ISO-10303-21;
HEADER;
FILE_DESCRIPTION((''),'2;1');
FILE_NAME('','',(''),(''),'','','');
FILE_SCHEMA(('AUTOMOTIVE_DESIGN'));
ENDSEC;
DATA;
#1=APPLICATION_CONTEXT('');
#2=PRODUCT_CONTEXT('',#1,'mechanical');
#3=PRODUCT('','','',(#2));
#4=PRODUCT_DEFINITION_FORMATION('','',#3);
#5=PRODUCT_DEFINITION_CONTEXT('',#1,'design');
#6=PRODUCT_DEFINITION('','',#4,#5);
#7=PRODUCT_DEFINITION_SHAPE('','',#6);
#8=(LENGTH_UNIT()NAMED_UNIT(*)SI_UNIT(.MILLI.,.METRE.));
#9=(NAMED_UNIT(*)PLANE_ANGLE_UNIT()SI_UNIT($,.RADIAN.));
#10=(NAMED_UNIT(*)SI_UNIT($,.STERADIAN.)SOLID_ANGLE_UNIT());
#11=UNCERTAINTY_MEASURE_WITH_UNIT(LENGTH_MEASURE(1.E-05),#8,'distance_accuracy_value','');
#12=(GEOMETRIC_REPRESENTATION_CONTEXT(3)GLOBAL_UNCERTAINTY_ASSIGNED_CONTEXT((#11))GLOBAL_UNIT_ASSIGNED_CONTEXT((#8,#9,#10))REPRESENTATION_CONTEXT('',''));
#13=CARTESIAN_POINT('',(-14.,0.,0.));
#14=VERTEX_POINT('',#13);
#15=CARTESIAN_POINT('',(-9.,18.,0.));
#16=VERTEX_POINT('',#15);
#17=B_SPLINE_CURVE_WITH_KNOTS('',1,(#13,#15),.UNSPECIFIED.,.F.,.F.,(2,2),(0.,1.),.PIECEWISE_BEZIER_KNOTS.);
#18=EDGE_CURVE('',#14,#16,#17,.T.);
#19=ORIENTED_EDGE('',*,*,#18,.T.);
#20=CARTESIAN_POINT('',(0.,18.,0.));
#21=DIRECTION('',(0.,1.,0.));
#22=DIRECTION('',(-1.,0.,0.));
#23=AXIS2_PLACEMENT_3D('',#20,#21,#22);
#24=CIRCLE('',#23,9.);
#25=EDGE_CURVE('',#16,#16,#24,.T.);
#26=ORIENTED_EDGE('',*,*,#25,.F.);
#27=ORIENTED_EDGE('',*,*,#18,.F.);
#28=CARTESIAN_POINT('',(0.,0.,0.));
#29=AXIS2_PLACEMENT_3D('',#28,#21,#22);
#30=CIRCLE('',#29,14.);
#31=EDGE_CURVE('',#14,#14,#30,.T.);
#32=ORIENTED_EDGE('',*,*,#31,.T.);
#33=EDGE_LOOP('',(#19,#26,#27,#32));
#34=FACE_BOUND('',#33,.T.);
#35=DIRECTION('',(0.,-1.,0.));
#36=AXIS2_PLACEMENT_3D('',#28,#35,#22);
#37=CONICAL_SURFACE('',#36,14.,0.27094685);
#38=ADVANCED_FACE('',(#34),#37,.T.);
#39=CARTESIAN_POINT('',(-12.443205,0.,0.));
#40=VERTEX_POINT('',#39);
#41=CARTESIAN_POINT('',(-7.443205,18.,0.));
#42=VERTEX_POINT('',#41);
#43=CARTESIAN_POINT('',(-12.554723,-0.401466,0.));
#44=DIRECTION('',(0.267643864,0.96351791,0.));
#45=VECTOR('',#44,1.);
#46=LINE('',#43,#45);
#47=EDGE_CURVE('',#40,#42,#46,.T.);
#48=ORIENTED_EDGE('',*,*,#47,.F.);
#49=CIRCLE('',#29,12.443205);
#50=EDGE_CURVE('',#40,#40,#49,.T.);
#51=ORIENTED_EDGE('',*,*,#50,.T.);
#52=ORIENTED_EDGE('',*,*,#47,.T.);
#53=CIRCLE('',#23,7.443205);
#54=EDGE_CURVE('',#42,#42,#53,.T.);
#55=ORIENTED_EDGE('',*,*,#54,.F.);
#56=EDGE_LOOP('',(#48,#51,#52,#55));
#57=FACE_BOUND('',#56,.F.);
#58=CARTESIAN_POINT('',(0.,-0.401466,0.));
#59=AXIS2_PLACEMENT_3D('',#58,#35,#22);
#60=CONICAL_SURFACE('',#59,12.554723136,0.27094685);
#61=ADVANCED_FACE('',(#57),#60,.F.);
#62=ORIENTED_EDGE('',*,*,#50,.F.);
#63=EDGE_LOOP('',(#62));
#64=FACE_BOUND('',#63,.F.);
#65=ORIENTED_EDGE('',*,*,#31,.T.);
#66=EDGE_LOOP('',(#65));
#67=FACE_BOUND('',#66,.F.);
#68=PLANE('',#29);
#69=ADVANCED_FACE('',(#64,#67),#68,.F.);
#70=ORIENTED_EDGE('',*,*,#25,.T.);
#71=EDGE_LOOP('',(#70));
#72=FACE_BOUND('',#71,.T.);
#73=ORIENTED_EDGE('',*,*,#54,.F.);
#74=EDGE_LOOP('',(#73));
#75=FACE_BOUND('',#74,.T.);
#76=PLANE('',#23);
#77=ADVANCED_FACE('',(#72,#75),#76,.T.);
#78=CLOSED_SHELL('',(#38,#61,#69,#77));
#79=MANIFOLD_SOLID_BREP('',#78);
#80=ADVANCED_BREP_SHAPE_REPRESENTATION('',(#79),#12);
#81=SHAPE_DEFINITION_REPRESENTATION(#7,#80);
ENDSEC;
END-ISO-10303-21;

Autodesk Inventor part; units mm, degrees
ref_plane "YZ Plane" through (0, 0, 0) normal (1, 0, 0) x (0, 1, 0)
ref_plane "XY Plane" through (0, 0, 0) normal (0, 0, 1) x (1, 0, 0)
sketch "Szkic6" plane through (0, 0, 0) normal (0, 1, 0) x (-1, 0, 0)
  circle A0 centre (0, 0) radius 14
  dimension "d33" = 28
ref_plane "Płaszczyzna konstrukcyjna1" through (0, 18, 0) normal (0, 1, 0) x (-1, 0, 0)
sketch "Szkic7" plane through (0, 18, 0) normal (0, 1, 0) x (-1, 0, 0)
  circle A0 centre (0, 0) radius 9
  dimension "d35" = 18
loft "Wyciągnięcie złożone1" add profiles "Szkic6", "Szkic7"
shell "Skorupa1" thickness 1.5 removed faces 2 at (-2.2455, 18, -1.9894) at (-0.5625, 0, 1.5565)
equation "\"d33\" = OD1"
equation "\"d35\" = OD2"
equation "\"d52\" = THK"
equation "\"SzerokośćGięciaPodcięcia\" = Grubość"
equation "\"RozmiarPodcięciaNarożnika\" = 4 * Grubość"
equation "\"PromieńPrzejścia\" = PromieńGięcia"
equation "\"Rozmiar_promienia_Jacobiego\" = PromieńGięcia"
equation "\"Wielk_odstępu\" = Grubość"
equation "\"d2\" = PromieńGięcia"
equation "\"d23\" = PromieńGięcia"
equation "\"OD1\" = 28"
equation "\"OD2\" = 18"
equation "\"L\" = 18"
equation "\"THK\" = 1.5"
equation "\"d34\" = L"
equation "\"Grubość\" = 1.5"
equation "\"PromieńGięcia\" = 3"
properties part number "Redukcja symetryczna Ø28x18x1,5 L=18" material "304"
